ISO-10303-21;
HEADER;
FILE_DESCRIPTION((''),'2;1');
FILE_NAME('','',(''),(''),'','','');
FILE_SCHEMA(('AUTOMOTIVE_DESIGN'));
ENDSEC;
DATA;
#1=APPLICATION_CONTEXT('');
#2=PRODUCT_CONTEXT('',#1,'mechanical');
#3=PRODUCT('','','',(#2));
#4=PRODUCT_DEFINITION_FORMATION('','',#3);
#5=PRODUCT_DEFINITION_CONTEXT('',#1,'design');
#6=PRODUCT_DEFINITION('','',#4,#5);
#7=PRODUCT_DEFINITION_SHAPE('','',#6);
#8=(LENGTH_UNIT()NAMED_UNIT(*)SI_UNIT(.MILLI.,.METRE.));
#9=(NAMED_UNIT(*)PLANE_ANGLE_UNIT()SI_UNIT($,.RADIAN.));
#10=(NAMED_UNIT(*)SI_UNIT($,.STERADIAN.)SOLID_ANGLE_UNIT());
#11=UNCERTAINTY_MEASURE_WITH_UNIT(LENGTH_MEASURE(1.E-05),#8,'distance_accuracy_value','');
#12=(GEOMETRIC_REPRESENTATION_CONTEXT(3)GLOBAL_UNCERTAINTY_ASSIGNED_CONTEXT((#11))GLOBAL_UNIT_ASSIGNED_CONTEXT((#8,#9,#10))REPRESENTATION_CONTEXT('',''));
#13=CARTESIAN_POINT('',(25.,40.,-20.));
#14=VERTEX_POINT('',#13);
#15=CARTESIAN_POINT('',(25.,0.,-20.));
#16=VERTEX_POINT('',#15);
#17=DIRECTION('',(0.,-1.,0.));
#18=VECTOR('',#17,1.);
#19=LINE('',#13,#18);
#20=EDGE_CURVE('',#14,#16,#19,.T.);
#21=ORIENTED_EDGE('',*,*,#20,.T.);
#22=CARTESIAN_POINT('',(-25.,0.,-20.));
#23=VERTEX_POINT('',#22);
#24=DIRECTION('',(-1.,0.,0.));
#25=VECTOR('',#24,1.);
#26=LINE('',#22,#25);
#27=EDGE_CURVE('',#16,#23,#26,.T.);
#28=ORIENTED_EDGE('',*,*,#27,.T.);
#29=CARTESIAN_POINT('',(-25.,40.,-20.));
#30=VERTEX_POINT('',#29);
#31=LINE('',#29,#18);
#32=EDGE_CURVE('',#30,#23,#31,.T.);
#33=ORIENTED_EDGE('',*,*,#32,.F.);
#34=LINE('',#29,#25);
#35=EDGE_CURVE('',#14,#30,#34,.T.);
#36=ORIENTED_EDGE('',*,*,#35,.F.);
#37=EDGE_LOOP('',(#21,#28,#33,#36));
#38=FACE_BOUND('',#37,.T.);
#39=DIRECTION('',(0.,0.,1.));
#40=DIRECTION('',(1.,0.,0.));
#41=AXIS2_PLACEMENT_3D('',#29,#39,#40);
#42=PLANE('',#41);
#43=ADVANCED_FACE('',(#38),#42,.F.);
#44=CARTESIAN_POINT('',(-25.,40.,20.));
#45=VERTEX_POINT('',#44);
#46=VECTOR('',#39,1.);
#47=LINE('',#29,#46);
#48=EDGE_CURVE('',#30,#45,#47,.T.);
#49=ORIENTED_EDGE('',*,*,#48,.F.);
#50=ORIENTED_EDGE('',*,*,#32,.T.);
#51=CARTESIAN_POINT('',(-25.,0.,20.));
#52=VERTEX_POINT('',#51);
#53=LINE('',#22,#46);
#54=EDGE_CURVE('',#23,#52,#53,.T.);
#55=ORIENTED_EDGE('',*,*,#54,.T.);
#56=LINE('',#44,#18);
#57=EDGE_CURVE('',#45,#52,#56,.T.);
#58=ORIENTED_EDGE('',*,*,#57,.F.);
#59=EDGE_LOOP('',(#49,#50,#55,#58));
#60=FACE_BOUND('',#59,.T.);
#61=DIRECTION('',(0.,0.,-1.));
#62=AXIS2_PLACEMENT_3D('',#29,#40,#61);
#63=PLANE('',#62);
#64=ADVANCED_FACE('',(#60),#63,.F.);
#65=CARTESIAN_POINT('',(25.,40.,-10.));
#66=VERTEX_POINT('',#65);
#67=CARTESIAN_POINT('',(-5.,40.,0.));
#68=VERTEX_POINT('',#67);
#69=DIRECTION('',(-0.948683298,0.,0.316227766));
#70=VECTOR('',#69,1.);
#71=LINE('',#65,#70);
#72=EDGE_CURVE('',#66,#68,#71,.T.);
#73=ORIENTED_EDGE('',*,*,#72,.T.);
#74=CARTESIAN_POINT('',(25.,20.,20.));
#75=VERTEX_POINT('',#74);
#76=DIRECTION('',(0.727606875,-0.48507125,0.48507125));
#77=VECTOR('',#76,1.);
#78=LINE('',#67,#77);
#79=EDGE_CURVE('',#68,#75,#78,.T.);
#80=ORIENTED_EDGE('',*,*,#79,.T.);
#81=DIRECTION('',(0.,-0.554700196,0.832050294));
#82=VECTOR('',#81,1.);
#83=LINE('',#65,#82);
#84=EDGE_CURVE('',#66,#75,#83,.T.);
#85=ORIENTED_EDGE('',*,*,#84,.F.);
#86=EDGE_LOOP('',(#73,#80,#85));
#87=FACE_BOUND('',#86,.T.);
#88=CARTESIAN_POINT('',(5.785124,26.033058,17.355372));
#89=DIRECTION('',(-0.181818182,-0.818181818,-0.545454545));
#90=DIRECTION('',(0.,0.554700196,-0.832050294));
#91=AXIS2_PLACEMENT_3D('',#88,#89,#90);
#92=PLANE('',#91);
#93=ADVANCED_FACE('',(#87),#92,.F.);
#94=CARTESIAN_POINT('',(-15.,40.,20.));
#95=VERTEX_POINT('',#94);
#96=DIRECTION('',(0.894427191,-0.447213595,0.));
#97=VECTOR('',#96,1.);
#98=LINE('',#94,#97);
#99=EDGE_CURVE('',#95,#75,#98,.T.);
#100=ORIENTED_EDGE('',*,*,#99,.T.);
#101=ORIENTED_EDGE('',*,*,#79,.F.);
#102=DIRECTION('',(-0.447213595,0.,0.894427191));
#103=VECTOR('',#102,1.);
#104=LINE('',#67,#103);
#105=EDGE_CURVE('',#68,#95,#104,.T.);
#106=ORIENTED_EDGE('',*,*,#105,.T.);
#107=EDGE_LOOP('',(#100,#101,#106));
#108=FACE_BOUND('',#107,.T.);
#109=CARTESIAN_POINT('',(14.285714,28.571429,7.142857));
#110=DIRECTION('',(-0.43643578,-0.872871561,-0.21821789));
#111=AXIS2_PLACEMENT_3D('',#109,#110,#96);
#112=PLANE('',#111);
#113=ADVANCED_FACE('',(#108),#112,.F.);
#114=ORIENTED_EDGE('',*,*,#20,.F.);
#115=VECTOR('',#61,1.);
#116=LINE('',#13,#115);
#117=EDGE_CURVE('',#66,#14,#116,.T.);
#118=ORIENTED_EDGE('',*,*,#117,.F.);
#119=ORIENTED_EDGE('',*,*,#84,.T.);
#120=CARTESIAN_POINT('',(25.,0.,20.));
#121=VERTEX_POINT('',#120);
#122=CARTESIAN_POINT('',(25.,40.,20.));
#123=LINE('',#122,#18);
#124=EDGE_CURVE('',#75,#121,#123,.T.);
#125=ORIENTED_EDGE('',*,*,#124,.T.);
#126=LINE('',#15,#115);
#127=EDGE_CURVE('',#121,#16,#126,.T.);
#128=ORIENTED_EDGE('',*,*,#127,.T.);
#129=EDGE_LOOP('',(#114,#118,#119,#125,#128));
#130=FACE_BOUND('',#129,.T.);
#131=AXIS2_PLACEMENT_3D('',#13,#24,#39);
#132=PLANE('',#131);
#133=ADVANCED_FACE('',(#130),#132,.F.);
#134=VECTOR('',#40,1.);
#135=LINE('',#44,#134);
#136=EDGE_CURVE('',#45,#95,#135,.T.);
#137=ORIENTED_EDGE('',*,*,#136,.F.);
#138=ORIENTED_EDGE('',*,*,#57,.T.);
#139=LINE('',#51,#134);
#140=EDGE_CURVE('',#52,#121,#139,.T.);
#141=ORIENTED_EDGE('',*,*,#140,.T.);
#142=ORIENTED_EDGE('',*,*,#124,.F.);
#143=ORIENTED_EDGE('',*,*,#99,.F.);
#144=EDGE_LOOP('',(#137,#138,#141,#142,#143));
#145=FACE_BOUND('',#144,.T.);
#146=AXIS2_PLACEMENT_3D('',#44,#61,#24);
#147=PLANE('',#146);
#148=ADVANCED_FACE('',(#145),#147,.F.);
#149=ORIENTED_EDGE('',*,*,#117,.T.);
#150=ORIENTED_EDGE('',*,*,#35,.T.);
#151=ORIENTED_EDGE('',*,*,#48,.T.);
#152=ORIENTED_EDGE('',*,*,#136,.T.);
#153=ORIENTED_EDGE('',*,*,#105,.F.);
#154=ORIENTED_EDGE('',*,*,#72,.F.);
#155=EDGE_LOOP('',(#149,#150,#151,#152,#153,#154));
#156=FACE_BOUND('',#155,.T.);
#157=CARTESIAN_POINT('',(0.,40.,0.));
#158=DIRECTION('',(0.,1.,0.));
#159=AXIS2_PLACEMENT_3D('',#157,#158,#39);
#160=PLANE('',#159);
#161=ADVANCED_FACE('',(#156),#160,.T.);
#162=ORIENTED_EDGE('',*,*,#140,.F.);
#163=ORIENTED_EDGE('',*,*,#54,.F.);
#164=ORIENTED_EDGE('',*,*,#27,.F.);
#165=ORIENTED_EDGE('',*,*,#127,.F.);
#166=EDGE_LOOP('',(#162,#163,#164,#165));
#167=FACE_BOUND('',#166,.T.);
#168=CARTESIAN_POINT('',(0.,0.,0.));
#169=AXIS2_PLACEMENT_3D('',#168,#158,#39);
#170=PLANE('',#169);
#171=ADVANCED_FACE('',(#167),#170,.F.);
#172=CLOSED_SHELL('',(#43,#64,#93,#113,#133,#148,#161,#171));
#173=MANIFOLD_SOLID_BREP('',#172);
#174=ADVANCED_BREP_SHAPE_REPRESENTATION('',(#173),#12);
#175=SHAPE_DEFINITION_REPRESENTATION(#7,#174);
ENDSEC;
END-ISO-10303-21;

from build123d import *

# Parameters (mm, degrees)
SKETCH1_W           = 50
SKETCH1_H           = 40
BOSS_EXTRUDE1_DEPTH = 40
CUT_LOFT1_START     = -23.040884378
CUT_LOFT1_DEPTH     = 41.231056256


# Read off the part's stored shape, not the designer's step: Cut-Loft1
with BuildPart() as part:
    # Sketch1 → Boss-Extrude1 (new body)
    with BuildSketch(Plane(origin=(0, 0, 0), x_dir=(1, 0, 0), z_dir=(0, 1, 0))):
        Rectangle(SKETCH1_W, SKETCH1_H)
    extrude(amount=BOSS_EXTRUDE1_DEPTH)

    # Cut-Loft1 outline → Cut-Loft1 (cut)
    with BuildSketch(Plane(origin=(0, 0, 0), x_dir=(0.6859943405700354, 0.5144957554275265, -0.5144957554275265), z_dir=(0.7276068751089988, -0.4850712500726662, 0.4850712500726662)).offset(CUT_LOFT1_START)):
        Polygon((-1.908261965, 44), (0, 42.426406871), (17.149858514, 28.284271247), (42.874646286, 21.213203436), (44, 20.903873287), (44, 44), align=None)
    extrude(amount=CUT_LOFT1_DEPTH, mode=Mode.SUBTRACT)


solid = part.part
